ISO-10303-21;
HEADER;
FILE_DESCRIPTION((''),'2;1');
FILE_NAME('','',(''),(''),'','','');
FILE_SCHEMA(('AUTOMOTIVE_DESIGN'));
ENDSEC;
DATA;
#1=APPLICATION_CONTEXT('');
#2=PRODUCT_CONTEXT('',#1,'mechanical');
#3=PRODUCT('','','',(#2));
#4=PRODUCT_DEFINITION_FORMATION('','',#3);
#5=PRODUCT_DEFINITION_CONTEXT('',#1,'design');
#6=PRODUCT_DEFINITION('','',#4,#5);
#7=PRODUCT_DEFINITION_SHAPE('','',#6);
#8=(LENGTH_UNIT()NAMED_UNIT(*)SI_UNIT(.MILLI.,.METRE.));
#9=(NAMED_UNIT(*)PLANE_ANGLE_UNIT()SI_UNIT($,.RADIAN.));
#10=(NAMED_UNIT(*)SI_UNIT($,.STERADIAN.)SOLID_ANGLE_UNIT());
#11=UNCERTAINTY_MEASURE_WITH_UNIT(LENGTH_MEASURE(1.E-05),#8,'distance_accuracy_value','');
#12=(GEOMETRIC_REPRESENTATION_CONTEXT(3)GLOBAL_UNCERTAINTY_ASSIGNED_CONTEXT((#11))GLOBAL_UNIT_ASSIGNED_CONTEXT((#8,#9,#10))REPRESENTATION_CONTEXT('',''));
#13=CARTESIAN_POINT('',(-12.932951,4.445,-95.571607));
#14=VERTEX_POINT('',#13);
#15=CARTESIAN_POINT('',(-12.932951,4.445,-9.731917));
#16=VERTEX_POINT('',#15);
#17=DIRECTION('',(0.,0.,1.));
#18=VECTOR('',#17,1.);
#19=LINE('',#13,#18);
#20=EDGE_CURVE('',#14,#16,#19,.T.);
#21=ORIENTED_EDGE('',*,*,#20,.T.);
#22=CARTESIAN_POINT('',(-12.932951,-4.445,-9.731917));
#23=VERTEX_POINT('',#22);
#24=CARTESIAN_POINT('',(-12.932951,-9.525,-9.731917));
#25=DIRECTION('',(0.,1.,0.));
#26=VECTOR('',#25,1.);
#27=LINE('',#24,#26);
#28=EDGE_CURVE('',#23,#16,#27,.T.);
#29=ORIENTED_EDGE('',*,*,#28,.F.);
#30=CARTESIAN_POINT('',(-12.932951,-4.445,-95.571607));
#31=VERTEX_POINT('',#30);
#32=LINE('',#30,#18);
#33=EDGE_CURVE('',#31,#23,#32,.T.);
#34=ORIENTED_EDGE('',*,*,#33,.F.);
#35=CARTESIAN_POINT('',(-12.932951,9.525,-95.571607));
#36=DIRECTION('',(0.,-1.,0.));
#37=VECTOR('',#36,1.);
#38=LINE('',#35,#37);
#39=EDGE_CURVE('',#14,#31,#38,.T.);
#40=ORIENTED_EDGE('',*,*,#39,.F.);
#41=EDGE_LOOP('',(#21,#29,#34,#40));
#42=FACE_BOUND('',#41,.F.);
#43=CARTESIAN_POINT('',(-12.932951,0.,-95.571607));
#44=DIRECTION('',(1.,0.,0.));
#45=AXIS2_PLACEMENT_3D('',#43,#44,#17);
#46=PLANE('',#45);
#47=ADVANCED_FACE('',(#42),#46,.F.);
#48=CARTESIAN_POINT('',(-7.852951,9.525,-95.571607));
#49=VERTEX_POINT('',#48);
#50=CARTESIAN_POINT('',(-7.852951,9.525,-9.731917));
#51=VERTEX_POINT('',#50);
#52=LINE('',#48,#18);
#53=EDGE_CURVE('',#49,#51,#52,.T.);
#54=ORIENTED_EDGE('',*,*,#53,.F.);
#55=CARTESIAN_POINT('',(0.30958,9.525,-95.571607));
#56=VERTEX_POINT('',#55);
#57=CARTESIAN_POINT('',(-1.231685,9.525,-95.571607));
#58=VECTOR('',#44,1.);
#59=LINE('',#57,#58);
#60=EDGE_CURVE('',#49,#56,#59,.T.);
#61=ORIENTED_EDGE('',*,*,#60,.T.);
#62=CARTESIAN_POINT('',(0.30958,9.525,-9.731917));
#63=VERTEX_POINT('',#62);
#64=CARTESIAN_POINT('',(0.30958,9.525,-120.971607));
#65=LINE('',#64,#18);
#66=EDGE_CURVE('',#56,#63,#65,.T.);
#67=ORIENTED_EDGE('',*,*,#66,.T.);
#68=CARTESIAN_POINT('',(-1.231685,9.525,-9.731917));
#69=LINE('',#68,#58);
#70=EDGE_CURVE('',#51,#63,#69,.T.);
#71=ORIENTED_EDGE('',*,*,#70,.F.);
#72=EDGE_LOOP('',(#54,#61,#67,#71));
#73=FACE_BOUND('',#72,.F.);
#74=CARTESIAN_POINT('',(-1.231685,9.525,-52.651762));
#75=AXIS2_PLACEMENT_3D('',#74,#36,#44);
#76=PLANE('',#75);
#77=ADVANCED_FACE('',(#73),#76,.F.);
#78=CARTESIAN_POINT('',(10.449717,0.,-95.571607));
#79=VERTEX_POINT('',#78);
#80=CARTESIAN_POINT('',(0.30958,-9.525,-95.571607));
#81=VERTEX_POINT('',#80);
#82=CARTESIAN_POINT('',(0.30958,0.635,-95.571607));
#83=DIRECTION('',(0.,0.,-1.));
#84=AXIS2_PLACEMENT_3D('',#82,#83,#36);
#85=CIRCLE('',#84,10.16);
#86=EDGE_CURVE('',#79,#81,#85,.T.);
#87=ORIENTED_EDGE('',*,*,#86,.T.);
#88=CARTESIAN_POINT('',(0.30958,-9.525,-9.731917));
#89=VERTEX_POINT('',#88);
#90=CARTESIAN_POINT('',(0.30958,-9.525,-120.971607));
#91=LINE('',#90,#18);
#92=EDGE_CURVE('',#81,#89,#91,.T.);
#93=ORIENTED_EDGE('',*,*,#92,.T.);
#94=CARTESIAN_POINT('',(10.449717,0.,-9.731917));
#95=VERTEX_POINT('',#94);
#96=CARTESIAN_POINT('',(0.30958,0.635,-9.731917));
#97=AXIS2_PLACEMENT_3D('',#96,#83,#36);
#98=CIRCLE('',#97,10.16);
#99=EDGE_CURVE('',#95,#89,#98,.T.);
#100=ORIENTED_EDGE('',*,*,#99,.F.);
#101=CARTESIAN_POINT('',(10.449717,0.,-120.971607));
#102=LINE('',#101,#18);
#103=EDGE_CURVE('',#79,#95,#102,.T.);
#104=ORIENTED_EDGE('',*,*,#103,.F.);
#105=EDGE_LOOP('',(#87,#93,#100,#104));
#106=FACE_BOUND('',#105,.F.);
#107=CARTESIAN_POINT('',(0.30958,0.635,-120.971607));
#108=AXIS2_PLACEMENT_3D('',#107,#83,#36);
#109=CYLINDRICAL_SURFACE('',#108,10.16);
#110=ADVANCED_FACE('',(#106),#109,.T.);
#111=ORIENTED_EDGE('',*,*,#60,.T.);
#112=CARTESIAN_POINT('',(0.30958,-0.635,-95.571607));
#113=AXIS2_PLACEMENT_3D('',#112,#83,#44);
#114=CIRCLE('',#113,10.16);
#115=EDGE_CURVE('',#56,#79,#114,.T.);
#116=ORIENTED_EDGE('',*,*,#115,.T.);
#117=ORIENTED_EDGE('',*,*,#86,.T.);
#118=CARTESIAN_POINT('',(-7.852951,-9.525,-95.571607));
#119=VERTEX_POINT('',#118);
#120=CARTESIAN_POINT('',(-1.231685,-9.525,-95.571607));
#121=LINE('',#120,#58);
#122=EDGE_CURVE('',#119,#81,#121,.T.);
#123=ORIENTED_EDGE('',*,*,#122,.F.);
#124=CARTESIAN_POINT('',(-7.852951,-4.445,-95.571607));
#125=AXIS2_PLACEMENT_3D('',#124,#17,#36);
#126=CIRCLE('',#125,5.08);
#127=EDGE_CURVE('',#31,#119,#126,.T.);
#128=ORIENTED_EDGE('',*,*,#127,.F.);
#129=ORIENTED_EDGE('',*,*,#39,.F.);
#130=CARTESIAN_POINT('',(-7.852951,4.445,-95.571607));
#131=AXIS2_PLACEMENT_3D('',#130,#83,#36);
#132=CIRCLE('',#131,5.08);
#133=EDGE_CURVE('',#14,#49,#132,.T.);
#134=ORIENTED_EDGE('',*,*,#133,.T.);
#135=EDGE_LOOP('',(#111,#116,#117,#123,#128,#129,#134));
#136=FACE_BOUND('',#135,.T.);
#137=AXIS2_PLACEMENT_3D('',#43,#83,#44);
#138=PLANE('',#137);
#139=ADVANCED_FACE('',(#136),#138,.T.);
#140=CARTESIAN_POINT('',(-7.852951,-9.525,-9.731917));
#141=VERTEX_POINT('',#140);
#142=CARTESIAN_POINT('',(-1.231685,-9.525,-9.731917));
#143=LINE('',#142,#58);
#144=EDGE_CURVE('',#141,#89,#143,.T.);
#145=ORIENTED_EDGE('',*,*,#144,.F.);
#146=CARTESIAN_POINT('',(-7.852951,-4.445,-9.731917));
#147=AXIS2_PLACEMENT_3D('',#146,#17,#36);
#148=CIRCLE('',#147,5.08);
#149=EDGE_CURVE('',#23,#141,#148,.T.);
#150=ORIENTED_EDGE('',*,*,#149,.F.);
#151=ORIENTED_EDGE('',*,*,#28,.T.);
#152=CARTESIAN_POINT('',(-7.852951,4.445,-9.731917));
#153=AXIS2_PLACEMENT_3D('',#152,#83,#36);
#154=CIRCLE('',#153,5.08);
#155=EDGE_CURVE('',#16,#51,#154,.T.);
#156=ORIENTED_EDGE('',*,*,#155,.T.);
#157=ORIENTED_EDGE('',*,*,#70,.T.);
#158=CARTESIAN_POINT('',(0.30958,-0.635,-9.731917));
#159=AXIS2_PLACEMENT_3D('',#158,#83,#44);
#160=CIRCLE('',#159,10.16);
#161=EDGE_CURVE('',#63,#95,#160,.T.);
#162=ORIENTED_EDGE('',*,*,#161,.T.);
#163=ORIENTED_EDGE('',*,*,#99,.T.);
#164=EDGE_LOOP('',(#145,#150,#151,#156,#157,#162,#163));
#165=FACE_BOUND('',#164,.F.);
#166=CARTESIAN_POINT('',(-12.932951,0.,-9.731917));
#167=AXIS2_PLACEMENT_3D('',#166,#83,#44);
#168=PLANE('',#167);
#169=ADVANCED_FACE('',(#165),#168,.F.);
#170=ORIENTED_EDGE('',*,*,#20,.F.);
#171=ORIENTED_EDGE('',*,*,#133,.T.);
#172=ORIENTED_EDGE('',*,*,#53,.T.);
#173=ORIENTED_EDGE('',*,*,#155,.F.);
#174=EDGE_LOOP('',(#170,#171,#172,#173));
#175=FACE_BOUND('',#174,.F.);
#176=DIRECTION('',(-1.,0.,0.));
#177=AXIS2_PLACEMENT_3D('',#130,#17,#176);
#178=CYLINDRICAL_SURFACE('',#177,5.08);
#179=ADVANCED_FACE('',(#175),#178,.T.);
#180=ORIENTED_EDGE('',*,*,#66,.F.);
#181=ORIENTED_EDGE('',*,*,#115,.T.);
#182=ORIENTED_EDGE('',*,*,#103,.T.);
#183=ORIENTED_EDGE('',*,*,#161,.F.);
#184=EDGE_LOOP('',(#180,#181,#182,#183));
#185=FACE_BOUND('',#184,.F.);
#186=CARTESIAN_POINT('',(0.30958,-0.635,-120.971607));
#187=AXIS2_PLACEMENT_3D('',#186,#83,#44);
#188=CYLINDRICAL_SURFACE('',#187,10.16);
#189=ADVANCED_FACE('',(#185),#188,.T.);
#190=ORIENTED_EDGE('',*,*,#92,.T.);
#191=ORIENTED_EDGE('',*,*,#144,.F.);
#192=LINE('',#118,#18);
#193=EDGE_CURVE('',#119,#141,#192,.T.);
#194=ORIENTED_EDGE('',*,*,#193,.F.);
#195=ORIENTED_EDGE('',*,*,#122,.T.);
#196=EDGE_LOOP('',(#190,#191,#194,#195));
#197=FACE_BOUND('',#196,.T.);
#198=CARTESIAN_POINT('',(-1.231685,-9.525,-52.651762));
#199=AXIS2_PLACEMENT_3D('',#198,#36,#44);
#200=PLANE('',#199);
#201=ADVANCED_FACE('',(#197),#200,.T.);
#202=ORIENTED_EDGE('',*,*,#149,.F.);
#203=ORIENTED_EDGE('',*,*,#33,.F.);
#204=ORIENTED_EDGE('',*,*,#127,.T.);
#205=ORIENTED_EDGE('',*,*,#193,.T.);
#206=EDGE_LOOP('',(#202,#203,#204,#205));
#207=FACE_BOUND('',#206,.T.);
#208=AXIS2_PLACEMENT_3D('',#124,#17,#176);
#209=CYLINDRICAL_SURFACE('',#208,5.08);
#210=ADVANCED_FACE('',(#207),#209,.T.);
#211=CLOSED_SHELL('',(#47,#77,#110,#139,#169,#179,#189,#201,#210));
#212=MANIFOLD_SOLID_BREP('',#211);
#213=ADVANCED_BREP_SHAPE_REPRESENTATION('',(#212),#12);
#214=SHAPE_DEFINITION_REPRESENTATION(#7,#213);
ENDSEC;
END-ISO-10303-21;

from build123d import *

# Parameters (mm, degrees)
F1_DEPTH    = 9.525
F0_W        = 23.402531108
F0_H        = 85.8396906406
F3_T1_DEPTH = 136.6396906406
F4_R        = 5.08


# Not quite as in the source:
# - a fillet or chamfer that OpenCascade refuses, or shapes differently, is made with other operations: its cross-section is extruded or revolved along the edge and cut away or added


with BuildPart() as f1:
    # F0 (on Front) → F1 (new body, symmetric)
    with BuildSketch(Plane.XZ):
        Polygon((-2.3270829115, -113.9840111136), (-12.9329506308, -113.9840111136), (-12.9329506308, -186.3234937191), (-2.3270829115, -199.3203783987), (8.2787848078, -186.3234937191), (8.2787848078, -113.9840111136), align=None)
    extrude(amount=F1_DEPTH, both=True)


with BuildPart() as f1b:
    # F0 (on Front) → F1, piece 2 (new body, symmetric)
    with BuildSketch(Plane.XZ):
        with Locations((-1.2316850768, -52.651762031)):
            Rectangle(F0_W, F0_H)
    extrude(amount=F1_DEPTH, both=True)

    # F3: fillet of radius 10.16 on 2 edges, made by hand

    # F3_s2 → F3_t1 (cut)
    with BuildSketch(Plane.XY.offset(-120.9716073513)):
        with BuildLine():
            ThreePointArc((0.3095804772, -9.525), (7.4937853741, -6.5492048969), (10.4695804772, 0.635))
            Line((10.4695804772, 0.635), (10.4695804772, -9.525))
            Line((10.4695804772, -9.525), (0.3095804772, -9.525))
        make_face()
        with BuildLine():
            ThreePointArc((10.4695804772, -0.635), (7.4937853741, 6.5492048969), (0.3095804772, 9.525))
            Line((0.3095804772, 9.525), (10.4695804772, 9.525))
            Line((10.4695804772, 9.525), (10.4695804772, -0.635))
        make_face()
    extrude(amount=F3_T1_DEPTH, mode=Mode.SUBTRACT)

    # F4
    f4_edges = [f1b.edges().sort_by_distance(p)[0] for p in [
        (-12.932951, 9.525, -52.651762),
        (-12.932951, -9.525, -52.651762),
    ]]
    fillet(f4_edges, radius=F4_R)


solid = f1b.part
